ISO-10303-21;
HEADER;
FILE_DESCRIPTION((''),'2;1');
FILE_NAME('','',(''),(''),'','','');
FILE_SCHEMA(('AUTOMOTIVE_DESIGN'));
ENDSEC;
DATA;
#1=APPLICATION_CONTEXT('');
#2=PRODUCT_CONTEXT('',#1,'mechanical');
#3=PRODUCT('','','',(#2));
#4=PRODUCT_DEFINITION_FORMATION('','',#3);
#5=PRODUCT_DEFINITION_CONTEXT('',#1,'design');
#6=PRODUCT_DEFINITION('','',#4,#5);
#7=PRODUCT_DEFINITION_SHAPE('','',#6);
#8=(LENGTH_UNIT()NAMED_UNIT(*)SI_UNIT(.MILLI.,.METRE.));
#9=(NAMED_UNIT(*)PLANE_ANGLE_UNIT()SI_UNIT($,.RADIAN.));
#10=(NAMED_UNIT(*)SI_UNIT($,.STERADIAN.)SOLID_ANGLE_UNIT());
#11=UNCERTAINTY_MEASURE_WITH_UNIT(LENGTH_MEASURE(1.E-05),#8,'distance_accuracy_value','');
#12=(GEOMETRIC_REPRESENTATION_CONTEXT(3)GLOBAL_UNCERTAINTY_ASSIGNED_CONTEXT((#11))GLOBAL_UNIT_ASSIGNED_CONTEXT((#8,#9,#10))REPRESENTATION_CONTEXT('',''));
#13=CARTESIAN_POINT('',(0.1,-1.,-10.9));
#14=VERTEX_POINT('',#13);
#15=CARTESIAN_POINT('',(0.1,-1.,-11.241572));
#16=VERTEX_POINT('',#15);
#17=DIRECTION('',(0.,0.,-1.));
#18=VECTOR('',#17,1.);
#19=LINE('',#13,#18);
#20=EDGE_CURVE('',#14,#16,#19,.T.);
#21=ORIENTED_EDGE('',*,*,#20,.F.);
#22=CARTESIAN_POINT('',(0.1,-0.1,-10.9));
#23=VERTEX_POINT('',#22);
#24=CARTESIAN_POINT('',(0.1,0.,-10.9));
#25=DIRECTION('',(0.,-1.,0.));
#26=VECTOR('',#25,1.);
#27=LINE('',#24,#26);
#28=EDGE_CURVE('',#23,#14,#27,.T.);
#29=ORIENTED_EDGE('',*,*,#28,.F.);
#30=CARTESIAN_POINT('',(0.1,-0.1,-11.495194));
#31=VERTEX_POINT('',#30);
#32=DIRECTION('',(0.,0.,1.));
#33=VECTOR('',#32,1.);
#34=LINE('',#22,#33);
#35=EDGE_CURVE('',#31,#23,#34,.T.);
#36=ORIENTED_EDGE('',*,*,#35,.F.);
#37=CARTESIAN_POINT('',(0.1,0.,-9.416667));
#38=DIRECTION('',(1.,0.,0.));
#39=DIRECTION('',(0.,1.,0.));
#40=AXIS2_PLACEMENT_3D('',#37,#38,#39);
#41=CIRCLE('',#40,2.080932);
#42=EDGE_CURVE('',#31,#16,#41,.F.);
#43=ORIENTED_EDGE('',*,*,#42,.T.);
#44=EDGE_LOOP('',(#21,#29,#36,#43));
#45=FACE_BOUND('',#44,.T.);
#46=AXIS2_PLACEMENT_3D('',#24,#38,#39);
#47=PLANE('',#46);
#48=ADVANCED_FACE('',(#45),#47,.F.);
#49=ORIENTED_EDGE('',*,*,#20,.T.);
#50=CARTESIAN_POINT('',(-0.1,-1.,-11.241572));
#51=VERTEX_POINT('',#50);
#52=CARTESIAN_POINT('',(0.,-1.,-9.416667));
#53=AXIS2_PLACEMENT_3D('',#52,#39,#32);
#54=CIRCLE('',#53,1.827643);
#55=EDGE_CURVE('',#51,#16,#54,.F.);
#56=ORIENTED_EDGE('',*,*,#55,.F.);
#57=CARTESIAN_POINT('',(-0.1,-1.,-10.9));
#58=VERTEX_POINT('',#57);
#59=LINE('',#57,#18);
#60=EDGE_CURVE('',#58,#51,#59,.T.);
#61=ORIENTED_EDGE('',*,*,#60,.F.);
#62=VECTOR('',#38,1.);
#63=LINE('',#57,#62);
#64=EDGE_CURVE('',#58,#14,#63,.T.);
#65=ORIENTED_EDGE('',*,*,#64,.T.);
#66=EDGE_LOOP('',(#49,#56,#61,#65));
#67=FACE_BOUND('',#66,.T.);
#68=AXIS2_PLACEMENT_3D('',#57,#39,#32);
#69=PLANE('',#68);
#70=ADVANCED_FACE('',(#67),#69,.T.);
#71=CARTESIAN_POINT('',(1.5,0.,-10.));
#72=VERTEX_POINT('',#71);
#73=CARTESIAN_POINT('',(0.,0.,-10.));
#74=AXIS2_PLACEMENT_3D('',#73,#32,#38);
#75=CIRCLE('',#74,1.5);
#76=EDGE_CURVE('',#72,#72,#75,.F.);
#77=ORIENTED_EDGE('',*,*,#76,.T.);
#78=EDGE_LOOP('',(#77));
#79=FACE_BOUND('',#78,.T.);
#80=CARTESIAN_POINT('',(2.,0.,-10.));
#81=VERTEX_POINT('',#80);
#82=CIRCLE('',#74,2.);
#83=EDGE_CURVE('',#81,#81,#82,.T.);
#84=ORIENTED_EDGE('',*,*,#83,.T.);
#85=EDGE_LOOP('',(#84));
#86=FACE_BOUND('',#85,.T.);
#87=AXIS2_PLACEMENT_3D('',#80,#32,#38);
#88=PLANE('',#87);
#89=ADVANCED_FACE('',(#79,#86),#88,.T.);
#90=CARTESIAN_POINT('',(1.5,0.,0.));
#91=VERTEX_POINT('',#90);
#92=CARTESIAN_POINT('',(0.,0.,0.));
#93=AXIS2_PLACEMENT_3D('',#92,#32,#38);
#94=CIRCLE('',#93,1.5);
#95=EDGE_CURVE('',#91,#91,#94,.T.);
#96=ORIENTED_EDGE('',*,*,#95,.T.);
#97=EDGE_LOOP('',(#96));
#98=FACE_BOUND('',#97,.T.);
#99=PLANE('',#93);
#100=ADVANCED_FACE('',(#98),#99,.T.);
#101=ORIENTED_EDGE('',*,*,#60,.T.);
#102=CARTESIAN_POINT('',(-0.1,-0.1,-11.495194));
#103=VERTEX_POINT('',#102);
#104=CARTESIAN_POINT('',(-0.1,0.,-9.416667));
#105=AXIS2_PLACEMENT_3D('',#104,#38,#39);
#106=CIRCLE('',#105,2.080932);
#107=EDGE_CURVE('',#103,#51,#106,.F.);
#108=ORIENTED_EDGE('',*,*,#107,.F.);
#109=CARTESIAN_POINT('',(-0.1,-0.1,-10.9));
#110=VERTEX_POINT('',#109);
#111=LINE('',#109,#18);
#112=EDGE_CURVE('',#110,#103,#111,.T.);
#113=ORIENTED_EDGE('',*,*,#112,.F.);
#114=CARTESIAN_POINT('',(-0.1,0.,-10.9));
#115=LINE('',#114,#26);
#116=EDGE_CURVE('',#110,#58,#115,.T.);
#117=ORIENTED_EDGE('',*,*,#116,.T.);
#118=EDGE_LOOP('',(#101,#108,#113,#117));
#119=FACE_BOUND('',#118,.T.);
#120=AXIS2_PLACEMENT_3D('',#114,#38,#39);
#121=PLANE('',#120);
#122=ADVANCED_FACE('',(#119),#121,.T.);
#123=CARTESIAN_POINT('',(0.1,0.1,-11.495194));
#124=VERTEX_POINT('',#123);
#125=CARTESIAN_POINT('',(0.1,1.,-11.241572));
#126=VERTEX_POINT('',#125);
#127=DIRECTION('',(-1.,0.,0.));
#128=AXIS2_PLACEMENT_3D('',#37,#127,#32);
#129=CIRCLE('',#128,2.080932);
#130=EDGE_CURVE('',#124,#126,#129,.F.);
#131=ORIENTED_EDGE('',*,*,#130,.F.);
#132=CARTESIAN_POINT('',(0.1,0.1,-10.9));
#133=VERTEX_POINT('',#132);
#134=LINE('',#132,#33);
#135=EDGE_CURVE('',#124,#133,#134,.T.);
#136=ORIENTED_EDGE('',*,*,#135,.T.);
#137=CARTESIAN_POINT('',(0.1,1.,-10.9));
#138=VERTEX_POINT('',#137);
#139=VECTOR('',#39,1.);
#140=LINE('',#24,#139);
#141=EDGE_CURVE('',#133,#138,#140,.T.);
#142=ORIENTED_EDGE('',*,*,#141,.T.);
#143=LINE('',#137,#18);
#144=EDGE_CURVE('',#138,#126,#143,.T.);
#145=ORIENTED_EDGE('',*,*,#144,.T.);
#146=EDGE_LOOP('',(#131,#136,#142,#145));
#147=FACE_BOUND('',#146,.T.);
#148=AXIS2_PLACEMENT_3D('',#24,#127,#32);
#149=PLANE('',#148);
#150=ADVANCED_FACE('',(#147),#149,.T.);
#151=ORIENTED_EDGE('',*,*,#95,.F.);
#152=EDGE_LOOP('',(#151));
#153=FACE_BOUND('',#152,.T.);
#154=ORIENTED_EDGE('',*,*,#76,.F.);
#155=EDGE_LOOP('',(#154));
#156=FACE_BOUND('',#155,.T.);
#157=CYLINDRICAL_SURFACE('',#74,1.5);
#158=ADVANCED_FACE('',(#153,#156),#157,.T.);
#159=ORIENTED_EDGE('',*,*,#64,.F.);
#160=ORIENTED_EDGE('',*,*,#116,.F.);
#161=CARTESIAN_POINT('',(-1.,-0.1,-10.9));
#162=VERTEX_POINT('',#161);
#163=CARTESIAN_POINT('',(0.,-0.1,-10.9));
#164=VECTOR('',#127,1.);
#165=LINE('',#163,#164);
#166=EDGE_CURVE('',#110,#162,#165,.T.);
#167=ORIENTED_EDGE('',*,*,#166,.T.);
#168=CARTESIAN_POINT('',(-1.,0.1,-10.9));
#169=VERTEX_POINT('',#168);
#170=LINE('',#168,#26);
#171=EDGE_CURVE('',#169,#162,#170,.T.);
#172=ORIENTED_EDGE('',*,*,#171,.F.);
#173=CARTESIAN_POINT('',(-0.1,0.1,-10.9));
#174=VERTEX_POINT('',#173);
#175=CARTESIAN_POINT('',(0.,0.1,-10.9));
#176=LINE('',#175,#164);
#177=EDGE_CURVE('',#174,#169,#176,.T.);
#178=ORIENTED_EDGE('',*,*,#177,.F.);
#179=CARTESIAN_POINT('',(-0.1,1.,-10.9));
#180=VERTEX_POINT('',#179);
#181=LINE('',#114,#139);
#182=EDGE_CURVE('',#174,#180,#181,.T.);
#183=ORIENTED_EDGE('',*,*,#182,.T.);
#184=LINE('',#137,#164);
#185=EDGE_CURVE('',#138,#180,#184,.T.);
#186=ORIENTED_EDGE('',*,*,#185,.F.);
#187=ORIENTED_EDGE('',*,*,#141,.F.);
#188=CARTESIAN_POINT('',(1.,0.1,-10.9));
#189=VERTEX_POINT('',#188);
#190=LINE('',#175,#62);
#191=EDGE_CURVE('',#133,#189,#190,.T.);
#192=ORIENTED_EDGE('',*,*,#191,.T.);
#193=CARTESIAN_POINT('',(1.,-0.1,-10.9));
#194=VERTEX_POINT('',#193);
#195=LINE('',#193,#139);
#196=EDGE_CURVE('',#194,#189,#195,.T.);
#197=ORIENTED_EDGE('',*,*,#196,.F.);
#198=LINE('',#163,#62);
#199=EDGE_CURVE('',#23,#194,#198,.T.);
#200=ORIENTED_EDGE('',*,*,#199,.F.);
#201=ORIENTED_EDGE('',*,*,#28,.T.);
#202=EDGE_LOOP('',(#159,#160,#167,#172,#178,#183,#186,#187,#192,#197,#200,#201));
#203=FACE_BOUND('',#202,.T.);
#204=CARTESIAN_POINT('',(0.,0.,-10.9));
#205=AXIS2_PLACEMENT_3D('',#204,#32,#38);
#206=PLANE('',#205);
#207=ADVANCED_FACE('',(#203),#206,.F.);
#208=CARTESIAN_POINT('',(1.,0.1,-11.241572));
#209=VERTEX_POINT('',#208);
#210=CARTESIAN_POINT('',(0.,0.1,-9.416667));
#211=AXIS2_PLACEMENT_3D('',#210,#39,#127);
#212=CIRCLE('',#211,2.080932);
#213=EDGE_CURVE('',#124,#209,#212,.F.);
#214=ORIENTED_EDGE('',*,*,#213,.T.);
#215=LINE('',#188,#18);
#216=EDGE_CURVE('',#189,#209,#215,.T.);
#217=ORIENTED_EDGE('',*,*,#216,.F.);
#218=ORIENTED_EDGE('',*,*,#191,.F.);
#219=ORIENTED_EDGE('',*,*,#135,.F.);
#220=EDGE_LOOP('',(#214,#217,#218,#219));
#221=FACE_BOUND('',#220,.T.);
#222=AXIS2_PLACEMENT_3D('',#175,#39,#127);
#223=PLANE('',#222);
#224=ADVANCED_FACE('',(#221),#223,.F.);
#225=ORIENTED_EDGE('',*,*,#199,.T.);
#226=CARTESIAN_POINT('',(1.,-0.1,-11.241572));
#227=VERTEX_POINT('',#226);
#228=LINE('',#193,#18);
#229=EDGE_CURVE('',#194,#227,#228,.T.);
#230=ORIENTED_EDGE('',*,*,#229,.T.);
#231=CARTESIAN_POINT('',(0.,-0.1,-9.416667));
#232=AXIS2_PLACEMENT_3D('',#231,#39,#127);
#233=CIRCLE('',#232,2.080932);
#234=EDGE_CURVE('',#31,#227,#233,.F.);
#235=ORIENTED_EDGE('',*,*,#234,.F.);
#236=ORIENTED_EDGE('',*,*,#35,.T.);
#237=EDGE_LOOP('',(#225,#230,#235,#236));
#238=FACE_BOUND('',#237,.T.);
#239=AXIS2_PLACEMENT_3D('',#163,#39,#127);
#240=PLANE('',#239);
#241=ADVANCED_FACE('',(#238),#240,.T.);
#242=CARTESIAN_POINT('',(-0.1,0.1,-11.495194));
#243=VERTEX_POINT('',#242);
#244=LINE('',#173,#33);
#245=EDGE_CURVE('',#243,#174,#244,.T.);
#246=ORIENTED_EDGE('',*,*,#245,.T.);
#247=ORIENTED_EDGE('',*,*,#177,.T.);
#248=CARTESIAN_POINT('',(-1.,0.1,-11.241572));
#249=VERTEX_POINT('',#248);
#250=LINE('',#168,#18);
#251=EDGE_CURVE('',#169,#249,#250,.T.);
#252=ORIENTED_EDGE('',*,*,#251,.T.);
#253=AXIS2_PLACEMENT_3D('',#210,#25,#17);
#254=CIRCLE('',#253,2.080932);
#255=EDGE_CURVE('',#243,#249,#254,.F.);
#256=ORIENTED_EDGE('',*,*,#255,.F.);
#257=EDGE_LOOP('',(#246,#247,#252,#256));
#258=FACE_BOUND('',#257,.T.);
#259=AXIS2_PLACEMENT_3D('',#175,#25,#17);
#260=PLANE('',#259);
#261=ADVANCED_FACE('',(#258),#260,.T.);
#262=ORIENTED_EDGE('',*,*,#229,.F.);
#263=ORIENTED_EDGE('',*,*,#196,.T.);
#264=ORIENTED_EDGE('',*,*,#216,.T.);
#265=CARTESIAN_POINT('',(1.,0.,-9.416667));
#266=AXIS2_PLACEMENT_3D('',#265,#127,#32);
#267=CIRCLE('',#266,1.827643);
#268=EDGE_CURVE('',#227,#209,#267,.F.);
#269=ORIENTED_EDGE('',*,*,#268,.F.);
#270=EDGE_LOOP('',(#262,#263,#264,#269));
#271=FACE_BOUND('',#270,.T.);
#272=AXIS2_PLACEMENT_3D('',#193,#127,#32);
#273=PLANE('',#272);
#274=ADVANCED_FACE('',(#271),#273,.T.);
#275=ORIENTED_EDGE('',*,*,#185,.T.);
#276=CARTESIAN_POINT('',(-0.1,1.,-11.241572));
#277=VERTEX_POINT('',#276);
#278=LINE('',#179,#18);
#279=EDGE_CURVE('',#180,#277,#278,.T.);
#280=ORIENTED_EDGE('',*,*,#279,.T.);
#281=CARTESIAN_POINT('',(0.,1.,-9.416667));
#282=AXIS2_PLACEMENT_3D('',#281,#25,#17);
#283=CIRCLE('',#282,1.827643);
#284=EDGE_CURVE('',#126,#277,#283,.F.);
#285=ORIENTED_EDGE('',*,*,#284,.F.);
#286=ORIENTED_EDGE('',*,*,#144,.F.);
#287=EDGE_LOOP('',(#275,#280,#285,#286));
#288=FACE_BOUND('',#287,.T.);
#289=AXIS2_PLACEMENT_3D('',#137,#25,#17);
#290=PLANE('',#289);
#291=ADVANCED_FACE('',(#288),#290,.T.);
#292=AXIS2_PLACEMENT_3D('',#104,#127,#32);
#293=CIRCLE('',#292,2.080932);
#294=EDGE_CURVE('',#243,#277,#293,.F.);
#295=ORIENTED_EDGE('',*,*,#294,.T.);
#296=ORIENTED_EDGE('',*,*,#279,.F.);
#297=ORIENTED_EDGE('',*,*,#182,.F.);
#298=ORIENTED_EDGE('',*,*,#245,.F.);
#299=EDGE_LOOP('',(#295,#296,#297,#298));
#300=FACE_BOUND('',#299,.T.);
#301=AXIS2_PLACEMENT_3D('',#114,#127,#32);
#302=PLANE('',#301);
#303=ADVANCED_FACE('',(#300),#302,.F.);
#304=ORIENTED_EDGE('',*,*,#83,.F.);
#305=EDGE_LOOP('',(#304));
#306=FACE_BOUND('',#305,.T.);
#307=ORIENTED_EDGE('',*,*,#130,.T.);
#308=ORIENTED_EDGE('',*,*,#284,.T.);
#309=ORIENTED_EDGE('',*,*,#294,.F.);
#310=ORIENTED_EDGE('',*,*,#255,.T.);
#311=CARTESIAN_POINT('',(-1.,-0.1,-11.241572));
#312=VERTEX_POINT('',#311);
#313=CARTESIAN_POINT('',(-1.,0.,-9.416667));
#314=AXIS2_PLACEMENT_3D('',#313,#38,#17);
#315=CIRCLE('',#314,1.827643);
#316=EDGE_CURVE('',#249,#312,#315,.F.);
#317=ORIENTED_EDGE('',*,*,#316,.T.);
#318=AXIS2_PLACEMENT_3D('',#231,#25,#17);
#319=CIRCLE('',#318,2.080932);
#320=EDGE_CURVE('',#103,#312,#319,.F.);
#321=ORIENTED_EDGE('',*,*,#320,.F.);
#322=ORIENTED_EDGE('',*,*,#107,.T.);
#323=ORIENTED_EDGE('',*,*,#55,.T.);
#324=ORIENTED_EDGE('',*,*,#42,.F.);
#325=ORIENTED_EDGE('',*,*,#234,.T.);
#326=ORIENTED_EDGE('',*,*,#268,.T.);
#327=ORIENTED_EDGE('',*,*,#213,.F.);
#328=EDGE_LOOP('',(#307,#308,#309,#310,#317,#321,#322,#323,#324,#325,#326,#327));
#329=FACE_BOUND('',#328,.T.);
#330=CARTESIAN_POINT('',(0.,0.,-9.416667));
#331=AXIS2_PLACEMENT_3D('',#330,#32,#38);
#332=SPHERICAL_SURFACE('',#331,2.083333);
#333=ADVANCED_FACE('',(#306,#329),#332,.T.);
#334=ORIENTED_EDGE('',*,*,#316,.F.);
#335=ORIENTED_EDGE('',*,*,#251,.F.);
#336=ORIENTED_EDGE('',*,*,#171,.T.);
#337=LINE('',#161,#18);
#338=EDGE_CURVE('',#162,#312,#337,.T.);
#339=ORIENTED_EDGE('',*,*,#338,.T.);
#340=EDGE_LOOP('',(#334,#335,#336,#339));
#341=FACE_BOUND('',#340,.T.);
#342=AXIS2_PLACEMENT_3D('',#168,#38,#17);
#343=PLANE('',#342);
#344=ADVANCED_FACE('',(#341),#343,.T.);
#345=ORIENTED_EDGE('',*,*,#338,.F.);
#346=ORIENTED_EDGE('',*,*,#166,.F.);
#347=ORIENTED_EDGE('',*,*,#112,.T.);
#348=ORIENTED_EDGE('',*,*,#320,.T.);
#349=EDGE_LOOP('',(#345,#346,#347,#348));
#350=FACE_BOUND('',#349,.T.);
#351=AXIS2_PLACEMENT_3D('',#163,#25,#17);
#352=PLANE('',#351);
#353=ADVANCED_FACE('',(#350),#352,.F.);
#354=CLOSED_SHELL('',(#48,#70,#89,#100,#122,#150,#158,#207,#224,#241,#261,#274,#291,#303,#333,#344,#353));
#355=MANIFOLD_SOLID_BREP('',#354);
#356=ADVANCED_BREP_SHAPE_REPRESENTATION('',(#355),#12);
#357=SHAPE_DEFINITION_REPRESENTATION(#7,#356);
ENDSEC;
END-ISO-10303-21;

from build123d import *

# Parameters (mm, degrees)
CROQUIS2_R                   = 1.5
SALIENTE_EXTRUIR1_DEPTH      = 10
CORTAR_EXTRUIR_L_MINA2_START = -0.6
CORTAR_EXTRUIR_L_MINA2_DEPTH = 0.6


# Read off the part's stored shape, not the designer's step: Cortar-Extruir-Lámina2
with BuildPart() as part:
    # Croquis2 → Saliente-Extruir1 (new body)
    with BuildSketch(Plane.XY):
        Circle(CROQUIS2_R)
    extrude(amount=-SALIENTE_EXTRUIR1_DEPTH)

    # Croquis4 → Revolución1 (revolve)
    with BuildSketch(Plane(origin=(0, 0, 0), x_dir=(1, 0, 0), z_dir=(0, 1, 0))):
        with BuildLine():
            Line((2, 10), (0, 10))
            Line((0, 10), (0, 11.5))
            ThreePointArc((0, 11.5), (1.25, 11.083333333), (2, 10))
        make_face()
    revolve(axis=Axis((0, 0, -10), (0, 0, -1)))

    # Cortar-Extruir-Lámina2 outline → Cortar-Extruir-Lámina2 (cut)
    with BuildSketch(Plane(origin=(0, 0, -11.5), x_dir=(-1, 0, 0), z_dir=(0, 0, -1)).offset(CORTAR_EXTRUIR_L_MINA2_START)):
        Polygon((0.1, -1), (0.1, -0.1), (1, -0.1), (1, 0.1), (0.1, 0.1), (0.1, 1), (-0.1, 1), (-0.1, 0.1), (-1, 0.1), (-1, -0.1), (-0.1, -0.1), (-0.1, -1), align=None)
    extrude(amount=CORTAR_EXTRUIR_L_MINA2_DEPTH, mode=Mode.SUBTRACT)


solid = part.part
